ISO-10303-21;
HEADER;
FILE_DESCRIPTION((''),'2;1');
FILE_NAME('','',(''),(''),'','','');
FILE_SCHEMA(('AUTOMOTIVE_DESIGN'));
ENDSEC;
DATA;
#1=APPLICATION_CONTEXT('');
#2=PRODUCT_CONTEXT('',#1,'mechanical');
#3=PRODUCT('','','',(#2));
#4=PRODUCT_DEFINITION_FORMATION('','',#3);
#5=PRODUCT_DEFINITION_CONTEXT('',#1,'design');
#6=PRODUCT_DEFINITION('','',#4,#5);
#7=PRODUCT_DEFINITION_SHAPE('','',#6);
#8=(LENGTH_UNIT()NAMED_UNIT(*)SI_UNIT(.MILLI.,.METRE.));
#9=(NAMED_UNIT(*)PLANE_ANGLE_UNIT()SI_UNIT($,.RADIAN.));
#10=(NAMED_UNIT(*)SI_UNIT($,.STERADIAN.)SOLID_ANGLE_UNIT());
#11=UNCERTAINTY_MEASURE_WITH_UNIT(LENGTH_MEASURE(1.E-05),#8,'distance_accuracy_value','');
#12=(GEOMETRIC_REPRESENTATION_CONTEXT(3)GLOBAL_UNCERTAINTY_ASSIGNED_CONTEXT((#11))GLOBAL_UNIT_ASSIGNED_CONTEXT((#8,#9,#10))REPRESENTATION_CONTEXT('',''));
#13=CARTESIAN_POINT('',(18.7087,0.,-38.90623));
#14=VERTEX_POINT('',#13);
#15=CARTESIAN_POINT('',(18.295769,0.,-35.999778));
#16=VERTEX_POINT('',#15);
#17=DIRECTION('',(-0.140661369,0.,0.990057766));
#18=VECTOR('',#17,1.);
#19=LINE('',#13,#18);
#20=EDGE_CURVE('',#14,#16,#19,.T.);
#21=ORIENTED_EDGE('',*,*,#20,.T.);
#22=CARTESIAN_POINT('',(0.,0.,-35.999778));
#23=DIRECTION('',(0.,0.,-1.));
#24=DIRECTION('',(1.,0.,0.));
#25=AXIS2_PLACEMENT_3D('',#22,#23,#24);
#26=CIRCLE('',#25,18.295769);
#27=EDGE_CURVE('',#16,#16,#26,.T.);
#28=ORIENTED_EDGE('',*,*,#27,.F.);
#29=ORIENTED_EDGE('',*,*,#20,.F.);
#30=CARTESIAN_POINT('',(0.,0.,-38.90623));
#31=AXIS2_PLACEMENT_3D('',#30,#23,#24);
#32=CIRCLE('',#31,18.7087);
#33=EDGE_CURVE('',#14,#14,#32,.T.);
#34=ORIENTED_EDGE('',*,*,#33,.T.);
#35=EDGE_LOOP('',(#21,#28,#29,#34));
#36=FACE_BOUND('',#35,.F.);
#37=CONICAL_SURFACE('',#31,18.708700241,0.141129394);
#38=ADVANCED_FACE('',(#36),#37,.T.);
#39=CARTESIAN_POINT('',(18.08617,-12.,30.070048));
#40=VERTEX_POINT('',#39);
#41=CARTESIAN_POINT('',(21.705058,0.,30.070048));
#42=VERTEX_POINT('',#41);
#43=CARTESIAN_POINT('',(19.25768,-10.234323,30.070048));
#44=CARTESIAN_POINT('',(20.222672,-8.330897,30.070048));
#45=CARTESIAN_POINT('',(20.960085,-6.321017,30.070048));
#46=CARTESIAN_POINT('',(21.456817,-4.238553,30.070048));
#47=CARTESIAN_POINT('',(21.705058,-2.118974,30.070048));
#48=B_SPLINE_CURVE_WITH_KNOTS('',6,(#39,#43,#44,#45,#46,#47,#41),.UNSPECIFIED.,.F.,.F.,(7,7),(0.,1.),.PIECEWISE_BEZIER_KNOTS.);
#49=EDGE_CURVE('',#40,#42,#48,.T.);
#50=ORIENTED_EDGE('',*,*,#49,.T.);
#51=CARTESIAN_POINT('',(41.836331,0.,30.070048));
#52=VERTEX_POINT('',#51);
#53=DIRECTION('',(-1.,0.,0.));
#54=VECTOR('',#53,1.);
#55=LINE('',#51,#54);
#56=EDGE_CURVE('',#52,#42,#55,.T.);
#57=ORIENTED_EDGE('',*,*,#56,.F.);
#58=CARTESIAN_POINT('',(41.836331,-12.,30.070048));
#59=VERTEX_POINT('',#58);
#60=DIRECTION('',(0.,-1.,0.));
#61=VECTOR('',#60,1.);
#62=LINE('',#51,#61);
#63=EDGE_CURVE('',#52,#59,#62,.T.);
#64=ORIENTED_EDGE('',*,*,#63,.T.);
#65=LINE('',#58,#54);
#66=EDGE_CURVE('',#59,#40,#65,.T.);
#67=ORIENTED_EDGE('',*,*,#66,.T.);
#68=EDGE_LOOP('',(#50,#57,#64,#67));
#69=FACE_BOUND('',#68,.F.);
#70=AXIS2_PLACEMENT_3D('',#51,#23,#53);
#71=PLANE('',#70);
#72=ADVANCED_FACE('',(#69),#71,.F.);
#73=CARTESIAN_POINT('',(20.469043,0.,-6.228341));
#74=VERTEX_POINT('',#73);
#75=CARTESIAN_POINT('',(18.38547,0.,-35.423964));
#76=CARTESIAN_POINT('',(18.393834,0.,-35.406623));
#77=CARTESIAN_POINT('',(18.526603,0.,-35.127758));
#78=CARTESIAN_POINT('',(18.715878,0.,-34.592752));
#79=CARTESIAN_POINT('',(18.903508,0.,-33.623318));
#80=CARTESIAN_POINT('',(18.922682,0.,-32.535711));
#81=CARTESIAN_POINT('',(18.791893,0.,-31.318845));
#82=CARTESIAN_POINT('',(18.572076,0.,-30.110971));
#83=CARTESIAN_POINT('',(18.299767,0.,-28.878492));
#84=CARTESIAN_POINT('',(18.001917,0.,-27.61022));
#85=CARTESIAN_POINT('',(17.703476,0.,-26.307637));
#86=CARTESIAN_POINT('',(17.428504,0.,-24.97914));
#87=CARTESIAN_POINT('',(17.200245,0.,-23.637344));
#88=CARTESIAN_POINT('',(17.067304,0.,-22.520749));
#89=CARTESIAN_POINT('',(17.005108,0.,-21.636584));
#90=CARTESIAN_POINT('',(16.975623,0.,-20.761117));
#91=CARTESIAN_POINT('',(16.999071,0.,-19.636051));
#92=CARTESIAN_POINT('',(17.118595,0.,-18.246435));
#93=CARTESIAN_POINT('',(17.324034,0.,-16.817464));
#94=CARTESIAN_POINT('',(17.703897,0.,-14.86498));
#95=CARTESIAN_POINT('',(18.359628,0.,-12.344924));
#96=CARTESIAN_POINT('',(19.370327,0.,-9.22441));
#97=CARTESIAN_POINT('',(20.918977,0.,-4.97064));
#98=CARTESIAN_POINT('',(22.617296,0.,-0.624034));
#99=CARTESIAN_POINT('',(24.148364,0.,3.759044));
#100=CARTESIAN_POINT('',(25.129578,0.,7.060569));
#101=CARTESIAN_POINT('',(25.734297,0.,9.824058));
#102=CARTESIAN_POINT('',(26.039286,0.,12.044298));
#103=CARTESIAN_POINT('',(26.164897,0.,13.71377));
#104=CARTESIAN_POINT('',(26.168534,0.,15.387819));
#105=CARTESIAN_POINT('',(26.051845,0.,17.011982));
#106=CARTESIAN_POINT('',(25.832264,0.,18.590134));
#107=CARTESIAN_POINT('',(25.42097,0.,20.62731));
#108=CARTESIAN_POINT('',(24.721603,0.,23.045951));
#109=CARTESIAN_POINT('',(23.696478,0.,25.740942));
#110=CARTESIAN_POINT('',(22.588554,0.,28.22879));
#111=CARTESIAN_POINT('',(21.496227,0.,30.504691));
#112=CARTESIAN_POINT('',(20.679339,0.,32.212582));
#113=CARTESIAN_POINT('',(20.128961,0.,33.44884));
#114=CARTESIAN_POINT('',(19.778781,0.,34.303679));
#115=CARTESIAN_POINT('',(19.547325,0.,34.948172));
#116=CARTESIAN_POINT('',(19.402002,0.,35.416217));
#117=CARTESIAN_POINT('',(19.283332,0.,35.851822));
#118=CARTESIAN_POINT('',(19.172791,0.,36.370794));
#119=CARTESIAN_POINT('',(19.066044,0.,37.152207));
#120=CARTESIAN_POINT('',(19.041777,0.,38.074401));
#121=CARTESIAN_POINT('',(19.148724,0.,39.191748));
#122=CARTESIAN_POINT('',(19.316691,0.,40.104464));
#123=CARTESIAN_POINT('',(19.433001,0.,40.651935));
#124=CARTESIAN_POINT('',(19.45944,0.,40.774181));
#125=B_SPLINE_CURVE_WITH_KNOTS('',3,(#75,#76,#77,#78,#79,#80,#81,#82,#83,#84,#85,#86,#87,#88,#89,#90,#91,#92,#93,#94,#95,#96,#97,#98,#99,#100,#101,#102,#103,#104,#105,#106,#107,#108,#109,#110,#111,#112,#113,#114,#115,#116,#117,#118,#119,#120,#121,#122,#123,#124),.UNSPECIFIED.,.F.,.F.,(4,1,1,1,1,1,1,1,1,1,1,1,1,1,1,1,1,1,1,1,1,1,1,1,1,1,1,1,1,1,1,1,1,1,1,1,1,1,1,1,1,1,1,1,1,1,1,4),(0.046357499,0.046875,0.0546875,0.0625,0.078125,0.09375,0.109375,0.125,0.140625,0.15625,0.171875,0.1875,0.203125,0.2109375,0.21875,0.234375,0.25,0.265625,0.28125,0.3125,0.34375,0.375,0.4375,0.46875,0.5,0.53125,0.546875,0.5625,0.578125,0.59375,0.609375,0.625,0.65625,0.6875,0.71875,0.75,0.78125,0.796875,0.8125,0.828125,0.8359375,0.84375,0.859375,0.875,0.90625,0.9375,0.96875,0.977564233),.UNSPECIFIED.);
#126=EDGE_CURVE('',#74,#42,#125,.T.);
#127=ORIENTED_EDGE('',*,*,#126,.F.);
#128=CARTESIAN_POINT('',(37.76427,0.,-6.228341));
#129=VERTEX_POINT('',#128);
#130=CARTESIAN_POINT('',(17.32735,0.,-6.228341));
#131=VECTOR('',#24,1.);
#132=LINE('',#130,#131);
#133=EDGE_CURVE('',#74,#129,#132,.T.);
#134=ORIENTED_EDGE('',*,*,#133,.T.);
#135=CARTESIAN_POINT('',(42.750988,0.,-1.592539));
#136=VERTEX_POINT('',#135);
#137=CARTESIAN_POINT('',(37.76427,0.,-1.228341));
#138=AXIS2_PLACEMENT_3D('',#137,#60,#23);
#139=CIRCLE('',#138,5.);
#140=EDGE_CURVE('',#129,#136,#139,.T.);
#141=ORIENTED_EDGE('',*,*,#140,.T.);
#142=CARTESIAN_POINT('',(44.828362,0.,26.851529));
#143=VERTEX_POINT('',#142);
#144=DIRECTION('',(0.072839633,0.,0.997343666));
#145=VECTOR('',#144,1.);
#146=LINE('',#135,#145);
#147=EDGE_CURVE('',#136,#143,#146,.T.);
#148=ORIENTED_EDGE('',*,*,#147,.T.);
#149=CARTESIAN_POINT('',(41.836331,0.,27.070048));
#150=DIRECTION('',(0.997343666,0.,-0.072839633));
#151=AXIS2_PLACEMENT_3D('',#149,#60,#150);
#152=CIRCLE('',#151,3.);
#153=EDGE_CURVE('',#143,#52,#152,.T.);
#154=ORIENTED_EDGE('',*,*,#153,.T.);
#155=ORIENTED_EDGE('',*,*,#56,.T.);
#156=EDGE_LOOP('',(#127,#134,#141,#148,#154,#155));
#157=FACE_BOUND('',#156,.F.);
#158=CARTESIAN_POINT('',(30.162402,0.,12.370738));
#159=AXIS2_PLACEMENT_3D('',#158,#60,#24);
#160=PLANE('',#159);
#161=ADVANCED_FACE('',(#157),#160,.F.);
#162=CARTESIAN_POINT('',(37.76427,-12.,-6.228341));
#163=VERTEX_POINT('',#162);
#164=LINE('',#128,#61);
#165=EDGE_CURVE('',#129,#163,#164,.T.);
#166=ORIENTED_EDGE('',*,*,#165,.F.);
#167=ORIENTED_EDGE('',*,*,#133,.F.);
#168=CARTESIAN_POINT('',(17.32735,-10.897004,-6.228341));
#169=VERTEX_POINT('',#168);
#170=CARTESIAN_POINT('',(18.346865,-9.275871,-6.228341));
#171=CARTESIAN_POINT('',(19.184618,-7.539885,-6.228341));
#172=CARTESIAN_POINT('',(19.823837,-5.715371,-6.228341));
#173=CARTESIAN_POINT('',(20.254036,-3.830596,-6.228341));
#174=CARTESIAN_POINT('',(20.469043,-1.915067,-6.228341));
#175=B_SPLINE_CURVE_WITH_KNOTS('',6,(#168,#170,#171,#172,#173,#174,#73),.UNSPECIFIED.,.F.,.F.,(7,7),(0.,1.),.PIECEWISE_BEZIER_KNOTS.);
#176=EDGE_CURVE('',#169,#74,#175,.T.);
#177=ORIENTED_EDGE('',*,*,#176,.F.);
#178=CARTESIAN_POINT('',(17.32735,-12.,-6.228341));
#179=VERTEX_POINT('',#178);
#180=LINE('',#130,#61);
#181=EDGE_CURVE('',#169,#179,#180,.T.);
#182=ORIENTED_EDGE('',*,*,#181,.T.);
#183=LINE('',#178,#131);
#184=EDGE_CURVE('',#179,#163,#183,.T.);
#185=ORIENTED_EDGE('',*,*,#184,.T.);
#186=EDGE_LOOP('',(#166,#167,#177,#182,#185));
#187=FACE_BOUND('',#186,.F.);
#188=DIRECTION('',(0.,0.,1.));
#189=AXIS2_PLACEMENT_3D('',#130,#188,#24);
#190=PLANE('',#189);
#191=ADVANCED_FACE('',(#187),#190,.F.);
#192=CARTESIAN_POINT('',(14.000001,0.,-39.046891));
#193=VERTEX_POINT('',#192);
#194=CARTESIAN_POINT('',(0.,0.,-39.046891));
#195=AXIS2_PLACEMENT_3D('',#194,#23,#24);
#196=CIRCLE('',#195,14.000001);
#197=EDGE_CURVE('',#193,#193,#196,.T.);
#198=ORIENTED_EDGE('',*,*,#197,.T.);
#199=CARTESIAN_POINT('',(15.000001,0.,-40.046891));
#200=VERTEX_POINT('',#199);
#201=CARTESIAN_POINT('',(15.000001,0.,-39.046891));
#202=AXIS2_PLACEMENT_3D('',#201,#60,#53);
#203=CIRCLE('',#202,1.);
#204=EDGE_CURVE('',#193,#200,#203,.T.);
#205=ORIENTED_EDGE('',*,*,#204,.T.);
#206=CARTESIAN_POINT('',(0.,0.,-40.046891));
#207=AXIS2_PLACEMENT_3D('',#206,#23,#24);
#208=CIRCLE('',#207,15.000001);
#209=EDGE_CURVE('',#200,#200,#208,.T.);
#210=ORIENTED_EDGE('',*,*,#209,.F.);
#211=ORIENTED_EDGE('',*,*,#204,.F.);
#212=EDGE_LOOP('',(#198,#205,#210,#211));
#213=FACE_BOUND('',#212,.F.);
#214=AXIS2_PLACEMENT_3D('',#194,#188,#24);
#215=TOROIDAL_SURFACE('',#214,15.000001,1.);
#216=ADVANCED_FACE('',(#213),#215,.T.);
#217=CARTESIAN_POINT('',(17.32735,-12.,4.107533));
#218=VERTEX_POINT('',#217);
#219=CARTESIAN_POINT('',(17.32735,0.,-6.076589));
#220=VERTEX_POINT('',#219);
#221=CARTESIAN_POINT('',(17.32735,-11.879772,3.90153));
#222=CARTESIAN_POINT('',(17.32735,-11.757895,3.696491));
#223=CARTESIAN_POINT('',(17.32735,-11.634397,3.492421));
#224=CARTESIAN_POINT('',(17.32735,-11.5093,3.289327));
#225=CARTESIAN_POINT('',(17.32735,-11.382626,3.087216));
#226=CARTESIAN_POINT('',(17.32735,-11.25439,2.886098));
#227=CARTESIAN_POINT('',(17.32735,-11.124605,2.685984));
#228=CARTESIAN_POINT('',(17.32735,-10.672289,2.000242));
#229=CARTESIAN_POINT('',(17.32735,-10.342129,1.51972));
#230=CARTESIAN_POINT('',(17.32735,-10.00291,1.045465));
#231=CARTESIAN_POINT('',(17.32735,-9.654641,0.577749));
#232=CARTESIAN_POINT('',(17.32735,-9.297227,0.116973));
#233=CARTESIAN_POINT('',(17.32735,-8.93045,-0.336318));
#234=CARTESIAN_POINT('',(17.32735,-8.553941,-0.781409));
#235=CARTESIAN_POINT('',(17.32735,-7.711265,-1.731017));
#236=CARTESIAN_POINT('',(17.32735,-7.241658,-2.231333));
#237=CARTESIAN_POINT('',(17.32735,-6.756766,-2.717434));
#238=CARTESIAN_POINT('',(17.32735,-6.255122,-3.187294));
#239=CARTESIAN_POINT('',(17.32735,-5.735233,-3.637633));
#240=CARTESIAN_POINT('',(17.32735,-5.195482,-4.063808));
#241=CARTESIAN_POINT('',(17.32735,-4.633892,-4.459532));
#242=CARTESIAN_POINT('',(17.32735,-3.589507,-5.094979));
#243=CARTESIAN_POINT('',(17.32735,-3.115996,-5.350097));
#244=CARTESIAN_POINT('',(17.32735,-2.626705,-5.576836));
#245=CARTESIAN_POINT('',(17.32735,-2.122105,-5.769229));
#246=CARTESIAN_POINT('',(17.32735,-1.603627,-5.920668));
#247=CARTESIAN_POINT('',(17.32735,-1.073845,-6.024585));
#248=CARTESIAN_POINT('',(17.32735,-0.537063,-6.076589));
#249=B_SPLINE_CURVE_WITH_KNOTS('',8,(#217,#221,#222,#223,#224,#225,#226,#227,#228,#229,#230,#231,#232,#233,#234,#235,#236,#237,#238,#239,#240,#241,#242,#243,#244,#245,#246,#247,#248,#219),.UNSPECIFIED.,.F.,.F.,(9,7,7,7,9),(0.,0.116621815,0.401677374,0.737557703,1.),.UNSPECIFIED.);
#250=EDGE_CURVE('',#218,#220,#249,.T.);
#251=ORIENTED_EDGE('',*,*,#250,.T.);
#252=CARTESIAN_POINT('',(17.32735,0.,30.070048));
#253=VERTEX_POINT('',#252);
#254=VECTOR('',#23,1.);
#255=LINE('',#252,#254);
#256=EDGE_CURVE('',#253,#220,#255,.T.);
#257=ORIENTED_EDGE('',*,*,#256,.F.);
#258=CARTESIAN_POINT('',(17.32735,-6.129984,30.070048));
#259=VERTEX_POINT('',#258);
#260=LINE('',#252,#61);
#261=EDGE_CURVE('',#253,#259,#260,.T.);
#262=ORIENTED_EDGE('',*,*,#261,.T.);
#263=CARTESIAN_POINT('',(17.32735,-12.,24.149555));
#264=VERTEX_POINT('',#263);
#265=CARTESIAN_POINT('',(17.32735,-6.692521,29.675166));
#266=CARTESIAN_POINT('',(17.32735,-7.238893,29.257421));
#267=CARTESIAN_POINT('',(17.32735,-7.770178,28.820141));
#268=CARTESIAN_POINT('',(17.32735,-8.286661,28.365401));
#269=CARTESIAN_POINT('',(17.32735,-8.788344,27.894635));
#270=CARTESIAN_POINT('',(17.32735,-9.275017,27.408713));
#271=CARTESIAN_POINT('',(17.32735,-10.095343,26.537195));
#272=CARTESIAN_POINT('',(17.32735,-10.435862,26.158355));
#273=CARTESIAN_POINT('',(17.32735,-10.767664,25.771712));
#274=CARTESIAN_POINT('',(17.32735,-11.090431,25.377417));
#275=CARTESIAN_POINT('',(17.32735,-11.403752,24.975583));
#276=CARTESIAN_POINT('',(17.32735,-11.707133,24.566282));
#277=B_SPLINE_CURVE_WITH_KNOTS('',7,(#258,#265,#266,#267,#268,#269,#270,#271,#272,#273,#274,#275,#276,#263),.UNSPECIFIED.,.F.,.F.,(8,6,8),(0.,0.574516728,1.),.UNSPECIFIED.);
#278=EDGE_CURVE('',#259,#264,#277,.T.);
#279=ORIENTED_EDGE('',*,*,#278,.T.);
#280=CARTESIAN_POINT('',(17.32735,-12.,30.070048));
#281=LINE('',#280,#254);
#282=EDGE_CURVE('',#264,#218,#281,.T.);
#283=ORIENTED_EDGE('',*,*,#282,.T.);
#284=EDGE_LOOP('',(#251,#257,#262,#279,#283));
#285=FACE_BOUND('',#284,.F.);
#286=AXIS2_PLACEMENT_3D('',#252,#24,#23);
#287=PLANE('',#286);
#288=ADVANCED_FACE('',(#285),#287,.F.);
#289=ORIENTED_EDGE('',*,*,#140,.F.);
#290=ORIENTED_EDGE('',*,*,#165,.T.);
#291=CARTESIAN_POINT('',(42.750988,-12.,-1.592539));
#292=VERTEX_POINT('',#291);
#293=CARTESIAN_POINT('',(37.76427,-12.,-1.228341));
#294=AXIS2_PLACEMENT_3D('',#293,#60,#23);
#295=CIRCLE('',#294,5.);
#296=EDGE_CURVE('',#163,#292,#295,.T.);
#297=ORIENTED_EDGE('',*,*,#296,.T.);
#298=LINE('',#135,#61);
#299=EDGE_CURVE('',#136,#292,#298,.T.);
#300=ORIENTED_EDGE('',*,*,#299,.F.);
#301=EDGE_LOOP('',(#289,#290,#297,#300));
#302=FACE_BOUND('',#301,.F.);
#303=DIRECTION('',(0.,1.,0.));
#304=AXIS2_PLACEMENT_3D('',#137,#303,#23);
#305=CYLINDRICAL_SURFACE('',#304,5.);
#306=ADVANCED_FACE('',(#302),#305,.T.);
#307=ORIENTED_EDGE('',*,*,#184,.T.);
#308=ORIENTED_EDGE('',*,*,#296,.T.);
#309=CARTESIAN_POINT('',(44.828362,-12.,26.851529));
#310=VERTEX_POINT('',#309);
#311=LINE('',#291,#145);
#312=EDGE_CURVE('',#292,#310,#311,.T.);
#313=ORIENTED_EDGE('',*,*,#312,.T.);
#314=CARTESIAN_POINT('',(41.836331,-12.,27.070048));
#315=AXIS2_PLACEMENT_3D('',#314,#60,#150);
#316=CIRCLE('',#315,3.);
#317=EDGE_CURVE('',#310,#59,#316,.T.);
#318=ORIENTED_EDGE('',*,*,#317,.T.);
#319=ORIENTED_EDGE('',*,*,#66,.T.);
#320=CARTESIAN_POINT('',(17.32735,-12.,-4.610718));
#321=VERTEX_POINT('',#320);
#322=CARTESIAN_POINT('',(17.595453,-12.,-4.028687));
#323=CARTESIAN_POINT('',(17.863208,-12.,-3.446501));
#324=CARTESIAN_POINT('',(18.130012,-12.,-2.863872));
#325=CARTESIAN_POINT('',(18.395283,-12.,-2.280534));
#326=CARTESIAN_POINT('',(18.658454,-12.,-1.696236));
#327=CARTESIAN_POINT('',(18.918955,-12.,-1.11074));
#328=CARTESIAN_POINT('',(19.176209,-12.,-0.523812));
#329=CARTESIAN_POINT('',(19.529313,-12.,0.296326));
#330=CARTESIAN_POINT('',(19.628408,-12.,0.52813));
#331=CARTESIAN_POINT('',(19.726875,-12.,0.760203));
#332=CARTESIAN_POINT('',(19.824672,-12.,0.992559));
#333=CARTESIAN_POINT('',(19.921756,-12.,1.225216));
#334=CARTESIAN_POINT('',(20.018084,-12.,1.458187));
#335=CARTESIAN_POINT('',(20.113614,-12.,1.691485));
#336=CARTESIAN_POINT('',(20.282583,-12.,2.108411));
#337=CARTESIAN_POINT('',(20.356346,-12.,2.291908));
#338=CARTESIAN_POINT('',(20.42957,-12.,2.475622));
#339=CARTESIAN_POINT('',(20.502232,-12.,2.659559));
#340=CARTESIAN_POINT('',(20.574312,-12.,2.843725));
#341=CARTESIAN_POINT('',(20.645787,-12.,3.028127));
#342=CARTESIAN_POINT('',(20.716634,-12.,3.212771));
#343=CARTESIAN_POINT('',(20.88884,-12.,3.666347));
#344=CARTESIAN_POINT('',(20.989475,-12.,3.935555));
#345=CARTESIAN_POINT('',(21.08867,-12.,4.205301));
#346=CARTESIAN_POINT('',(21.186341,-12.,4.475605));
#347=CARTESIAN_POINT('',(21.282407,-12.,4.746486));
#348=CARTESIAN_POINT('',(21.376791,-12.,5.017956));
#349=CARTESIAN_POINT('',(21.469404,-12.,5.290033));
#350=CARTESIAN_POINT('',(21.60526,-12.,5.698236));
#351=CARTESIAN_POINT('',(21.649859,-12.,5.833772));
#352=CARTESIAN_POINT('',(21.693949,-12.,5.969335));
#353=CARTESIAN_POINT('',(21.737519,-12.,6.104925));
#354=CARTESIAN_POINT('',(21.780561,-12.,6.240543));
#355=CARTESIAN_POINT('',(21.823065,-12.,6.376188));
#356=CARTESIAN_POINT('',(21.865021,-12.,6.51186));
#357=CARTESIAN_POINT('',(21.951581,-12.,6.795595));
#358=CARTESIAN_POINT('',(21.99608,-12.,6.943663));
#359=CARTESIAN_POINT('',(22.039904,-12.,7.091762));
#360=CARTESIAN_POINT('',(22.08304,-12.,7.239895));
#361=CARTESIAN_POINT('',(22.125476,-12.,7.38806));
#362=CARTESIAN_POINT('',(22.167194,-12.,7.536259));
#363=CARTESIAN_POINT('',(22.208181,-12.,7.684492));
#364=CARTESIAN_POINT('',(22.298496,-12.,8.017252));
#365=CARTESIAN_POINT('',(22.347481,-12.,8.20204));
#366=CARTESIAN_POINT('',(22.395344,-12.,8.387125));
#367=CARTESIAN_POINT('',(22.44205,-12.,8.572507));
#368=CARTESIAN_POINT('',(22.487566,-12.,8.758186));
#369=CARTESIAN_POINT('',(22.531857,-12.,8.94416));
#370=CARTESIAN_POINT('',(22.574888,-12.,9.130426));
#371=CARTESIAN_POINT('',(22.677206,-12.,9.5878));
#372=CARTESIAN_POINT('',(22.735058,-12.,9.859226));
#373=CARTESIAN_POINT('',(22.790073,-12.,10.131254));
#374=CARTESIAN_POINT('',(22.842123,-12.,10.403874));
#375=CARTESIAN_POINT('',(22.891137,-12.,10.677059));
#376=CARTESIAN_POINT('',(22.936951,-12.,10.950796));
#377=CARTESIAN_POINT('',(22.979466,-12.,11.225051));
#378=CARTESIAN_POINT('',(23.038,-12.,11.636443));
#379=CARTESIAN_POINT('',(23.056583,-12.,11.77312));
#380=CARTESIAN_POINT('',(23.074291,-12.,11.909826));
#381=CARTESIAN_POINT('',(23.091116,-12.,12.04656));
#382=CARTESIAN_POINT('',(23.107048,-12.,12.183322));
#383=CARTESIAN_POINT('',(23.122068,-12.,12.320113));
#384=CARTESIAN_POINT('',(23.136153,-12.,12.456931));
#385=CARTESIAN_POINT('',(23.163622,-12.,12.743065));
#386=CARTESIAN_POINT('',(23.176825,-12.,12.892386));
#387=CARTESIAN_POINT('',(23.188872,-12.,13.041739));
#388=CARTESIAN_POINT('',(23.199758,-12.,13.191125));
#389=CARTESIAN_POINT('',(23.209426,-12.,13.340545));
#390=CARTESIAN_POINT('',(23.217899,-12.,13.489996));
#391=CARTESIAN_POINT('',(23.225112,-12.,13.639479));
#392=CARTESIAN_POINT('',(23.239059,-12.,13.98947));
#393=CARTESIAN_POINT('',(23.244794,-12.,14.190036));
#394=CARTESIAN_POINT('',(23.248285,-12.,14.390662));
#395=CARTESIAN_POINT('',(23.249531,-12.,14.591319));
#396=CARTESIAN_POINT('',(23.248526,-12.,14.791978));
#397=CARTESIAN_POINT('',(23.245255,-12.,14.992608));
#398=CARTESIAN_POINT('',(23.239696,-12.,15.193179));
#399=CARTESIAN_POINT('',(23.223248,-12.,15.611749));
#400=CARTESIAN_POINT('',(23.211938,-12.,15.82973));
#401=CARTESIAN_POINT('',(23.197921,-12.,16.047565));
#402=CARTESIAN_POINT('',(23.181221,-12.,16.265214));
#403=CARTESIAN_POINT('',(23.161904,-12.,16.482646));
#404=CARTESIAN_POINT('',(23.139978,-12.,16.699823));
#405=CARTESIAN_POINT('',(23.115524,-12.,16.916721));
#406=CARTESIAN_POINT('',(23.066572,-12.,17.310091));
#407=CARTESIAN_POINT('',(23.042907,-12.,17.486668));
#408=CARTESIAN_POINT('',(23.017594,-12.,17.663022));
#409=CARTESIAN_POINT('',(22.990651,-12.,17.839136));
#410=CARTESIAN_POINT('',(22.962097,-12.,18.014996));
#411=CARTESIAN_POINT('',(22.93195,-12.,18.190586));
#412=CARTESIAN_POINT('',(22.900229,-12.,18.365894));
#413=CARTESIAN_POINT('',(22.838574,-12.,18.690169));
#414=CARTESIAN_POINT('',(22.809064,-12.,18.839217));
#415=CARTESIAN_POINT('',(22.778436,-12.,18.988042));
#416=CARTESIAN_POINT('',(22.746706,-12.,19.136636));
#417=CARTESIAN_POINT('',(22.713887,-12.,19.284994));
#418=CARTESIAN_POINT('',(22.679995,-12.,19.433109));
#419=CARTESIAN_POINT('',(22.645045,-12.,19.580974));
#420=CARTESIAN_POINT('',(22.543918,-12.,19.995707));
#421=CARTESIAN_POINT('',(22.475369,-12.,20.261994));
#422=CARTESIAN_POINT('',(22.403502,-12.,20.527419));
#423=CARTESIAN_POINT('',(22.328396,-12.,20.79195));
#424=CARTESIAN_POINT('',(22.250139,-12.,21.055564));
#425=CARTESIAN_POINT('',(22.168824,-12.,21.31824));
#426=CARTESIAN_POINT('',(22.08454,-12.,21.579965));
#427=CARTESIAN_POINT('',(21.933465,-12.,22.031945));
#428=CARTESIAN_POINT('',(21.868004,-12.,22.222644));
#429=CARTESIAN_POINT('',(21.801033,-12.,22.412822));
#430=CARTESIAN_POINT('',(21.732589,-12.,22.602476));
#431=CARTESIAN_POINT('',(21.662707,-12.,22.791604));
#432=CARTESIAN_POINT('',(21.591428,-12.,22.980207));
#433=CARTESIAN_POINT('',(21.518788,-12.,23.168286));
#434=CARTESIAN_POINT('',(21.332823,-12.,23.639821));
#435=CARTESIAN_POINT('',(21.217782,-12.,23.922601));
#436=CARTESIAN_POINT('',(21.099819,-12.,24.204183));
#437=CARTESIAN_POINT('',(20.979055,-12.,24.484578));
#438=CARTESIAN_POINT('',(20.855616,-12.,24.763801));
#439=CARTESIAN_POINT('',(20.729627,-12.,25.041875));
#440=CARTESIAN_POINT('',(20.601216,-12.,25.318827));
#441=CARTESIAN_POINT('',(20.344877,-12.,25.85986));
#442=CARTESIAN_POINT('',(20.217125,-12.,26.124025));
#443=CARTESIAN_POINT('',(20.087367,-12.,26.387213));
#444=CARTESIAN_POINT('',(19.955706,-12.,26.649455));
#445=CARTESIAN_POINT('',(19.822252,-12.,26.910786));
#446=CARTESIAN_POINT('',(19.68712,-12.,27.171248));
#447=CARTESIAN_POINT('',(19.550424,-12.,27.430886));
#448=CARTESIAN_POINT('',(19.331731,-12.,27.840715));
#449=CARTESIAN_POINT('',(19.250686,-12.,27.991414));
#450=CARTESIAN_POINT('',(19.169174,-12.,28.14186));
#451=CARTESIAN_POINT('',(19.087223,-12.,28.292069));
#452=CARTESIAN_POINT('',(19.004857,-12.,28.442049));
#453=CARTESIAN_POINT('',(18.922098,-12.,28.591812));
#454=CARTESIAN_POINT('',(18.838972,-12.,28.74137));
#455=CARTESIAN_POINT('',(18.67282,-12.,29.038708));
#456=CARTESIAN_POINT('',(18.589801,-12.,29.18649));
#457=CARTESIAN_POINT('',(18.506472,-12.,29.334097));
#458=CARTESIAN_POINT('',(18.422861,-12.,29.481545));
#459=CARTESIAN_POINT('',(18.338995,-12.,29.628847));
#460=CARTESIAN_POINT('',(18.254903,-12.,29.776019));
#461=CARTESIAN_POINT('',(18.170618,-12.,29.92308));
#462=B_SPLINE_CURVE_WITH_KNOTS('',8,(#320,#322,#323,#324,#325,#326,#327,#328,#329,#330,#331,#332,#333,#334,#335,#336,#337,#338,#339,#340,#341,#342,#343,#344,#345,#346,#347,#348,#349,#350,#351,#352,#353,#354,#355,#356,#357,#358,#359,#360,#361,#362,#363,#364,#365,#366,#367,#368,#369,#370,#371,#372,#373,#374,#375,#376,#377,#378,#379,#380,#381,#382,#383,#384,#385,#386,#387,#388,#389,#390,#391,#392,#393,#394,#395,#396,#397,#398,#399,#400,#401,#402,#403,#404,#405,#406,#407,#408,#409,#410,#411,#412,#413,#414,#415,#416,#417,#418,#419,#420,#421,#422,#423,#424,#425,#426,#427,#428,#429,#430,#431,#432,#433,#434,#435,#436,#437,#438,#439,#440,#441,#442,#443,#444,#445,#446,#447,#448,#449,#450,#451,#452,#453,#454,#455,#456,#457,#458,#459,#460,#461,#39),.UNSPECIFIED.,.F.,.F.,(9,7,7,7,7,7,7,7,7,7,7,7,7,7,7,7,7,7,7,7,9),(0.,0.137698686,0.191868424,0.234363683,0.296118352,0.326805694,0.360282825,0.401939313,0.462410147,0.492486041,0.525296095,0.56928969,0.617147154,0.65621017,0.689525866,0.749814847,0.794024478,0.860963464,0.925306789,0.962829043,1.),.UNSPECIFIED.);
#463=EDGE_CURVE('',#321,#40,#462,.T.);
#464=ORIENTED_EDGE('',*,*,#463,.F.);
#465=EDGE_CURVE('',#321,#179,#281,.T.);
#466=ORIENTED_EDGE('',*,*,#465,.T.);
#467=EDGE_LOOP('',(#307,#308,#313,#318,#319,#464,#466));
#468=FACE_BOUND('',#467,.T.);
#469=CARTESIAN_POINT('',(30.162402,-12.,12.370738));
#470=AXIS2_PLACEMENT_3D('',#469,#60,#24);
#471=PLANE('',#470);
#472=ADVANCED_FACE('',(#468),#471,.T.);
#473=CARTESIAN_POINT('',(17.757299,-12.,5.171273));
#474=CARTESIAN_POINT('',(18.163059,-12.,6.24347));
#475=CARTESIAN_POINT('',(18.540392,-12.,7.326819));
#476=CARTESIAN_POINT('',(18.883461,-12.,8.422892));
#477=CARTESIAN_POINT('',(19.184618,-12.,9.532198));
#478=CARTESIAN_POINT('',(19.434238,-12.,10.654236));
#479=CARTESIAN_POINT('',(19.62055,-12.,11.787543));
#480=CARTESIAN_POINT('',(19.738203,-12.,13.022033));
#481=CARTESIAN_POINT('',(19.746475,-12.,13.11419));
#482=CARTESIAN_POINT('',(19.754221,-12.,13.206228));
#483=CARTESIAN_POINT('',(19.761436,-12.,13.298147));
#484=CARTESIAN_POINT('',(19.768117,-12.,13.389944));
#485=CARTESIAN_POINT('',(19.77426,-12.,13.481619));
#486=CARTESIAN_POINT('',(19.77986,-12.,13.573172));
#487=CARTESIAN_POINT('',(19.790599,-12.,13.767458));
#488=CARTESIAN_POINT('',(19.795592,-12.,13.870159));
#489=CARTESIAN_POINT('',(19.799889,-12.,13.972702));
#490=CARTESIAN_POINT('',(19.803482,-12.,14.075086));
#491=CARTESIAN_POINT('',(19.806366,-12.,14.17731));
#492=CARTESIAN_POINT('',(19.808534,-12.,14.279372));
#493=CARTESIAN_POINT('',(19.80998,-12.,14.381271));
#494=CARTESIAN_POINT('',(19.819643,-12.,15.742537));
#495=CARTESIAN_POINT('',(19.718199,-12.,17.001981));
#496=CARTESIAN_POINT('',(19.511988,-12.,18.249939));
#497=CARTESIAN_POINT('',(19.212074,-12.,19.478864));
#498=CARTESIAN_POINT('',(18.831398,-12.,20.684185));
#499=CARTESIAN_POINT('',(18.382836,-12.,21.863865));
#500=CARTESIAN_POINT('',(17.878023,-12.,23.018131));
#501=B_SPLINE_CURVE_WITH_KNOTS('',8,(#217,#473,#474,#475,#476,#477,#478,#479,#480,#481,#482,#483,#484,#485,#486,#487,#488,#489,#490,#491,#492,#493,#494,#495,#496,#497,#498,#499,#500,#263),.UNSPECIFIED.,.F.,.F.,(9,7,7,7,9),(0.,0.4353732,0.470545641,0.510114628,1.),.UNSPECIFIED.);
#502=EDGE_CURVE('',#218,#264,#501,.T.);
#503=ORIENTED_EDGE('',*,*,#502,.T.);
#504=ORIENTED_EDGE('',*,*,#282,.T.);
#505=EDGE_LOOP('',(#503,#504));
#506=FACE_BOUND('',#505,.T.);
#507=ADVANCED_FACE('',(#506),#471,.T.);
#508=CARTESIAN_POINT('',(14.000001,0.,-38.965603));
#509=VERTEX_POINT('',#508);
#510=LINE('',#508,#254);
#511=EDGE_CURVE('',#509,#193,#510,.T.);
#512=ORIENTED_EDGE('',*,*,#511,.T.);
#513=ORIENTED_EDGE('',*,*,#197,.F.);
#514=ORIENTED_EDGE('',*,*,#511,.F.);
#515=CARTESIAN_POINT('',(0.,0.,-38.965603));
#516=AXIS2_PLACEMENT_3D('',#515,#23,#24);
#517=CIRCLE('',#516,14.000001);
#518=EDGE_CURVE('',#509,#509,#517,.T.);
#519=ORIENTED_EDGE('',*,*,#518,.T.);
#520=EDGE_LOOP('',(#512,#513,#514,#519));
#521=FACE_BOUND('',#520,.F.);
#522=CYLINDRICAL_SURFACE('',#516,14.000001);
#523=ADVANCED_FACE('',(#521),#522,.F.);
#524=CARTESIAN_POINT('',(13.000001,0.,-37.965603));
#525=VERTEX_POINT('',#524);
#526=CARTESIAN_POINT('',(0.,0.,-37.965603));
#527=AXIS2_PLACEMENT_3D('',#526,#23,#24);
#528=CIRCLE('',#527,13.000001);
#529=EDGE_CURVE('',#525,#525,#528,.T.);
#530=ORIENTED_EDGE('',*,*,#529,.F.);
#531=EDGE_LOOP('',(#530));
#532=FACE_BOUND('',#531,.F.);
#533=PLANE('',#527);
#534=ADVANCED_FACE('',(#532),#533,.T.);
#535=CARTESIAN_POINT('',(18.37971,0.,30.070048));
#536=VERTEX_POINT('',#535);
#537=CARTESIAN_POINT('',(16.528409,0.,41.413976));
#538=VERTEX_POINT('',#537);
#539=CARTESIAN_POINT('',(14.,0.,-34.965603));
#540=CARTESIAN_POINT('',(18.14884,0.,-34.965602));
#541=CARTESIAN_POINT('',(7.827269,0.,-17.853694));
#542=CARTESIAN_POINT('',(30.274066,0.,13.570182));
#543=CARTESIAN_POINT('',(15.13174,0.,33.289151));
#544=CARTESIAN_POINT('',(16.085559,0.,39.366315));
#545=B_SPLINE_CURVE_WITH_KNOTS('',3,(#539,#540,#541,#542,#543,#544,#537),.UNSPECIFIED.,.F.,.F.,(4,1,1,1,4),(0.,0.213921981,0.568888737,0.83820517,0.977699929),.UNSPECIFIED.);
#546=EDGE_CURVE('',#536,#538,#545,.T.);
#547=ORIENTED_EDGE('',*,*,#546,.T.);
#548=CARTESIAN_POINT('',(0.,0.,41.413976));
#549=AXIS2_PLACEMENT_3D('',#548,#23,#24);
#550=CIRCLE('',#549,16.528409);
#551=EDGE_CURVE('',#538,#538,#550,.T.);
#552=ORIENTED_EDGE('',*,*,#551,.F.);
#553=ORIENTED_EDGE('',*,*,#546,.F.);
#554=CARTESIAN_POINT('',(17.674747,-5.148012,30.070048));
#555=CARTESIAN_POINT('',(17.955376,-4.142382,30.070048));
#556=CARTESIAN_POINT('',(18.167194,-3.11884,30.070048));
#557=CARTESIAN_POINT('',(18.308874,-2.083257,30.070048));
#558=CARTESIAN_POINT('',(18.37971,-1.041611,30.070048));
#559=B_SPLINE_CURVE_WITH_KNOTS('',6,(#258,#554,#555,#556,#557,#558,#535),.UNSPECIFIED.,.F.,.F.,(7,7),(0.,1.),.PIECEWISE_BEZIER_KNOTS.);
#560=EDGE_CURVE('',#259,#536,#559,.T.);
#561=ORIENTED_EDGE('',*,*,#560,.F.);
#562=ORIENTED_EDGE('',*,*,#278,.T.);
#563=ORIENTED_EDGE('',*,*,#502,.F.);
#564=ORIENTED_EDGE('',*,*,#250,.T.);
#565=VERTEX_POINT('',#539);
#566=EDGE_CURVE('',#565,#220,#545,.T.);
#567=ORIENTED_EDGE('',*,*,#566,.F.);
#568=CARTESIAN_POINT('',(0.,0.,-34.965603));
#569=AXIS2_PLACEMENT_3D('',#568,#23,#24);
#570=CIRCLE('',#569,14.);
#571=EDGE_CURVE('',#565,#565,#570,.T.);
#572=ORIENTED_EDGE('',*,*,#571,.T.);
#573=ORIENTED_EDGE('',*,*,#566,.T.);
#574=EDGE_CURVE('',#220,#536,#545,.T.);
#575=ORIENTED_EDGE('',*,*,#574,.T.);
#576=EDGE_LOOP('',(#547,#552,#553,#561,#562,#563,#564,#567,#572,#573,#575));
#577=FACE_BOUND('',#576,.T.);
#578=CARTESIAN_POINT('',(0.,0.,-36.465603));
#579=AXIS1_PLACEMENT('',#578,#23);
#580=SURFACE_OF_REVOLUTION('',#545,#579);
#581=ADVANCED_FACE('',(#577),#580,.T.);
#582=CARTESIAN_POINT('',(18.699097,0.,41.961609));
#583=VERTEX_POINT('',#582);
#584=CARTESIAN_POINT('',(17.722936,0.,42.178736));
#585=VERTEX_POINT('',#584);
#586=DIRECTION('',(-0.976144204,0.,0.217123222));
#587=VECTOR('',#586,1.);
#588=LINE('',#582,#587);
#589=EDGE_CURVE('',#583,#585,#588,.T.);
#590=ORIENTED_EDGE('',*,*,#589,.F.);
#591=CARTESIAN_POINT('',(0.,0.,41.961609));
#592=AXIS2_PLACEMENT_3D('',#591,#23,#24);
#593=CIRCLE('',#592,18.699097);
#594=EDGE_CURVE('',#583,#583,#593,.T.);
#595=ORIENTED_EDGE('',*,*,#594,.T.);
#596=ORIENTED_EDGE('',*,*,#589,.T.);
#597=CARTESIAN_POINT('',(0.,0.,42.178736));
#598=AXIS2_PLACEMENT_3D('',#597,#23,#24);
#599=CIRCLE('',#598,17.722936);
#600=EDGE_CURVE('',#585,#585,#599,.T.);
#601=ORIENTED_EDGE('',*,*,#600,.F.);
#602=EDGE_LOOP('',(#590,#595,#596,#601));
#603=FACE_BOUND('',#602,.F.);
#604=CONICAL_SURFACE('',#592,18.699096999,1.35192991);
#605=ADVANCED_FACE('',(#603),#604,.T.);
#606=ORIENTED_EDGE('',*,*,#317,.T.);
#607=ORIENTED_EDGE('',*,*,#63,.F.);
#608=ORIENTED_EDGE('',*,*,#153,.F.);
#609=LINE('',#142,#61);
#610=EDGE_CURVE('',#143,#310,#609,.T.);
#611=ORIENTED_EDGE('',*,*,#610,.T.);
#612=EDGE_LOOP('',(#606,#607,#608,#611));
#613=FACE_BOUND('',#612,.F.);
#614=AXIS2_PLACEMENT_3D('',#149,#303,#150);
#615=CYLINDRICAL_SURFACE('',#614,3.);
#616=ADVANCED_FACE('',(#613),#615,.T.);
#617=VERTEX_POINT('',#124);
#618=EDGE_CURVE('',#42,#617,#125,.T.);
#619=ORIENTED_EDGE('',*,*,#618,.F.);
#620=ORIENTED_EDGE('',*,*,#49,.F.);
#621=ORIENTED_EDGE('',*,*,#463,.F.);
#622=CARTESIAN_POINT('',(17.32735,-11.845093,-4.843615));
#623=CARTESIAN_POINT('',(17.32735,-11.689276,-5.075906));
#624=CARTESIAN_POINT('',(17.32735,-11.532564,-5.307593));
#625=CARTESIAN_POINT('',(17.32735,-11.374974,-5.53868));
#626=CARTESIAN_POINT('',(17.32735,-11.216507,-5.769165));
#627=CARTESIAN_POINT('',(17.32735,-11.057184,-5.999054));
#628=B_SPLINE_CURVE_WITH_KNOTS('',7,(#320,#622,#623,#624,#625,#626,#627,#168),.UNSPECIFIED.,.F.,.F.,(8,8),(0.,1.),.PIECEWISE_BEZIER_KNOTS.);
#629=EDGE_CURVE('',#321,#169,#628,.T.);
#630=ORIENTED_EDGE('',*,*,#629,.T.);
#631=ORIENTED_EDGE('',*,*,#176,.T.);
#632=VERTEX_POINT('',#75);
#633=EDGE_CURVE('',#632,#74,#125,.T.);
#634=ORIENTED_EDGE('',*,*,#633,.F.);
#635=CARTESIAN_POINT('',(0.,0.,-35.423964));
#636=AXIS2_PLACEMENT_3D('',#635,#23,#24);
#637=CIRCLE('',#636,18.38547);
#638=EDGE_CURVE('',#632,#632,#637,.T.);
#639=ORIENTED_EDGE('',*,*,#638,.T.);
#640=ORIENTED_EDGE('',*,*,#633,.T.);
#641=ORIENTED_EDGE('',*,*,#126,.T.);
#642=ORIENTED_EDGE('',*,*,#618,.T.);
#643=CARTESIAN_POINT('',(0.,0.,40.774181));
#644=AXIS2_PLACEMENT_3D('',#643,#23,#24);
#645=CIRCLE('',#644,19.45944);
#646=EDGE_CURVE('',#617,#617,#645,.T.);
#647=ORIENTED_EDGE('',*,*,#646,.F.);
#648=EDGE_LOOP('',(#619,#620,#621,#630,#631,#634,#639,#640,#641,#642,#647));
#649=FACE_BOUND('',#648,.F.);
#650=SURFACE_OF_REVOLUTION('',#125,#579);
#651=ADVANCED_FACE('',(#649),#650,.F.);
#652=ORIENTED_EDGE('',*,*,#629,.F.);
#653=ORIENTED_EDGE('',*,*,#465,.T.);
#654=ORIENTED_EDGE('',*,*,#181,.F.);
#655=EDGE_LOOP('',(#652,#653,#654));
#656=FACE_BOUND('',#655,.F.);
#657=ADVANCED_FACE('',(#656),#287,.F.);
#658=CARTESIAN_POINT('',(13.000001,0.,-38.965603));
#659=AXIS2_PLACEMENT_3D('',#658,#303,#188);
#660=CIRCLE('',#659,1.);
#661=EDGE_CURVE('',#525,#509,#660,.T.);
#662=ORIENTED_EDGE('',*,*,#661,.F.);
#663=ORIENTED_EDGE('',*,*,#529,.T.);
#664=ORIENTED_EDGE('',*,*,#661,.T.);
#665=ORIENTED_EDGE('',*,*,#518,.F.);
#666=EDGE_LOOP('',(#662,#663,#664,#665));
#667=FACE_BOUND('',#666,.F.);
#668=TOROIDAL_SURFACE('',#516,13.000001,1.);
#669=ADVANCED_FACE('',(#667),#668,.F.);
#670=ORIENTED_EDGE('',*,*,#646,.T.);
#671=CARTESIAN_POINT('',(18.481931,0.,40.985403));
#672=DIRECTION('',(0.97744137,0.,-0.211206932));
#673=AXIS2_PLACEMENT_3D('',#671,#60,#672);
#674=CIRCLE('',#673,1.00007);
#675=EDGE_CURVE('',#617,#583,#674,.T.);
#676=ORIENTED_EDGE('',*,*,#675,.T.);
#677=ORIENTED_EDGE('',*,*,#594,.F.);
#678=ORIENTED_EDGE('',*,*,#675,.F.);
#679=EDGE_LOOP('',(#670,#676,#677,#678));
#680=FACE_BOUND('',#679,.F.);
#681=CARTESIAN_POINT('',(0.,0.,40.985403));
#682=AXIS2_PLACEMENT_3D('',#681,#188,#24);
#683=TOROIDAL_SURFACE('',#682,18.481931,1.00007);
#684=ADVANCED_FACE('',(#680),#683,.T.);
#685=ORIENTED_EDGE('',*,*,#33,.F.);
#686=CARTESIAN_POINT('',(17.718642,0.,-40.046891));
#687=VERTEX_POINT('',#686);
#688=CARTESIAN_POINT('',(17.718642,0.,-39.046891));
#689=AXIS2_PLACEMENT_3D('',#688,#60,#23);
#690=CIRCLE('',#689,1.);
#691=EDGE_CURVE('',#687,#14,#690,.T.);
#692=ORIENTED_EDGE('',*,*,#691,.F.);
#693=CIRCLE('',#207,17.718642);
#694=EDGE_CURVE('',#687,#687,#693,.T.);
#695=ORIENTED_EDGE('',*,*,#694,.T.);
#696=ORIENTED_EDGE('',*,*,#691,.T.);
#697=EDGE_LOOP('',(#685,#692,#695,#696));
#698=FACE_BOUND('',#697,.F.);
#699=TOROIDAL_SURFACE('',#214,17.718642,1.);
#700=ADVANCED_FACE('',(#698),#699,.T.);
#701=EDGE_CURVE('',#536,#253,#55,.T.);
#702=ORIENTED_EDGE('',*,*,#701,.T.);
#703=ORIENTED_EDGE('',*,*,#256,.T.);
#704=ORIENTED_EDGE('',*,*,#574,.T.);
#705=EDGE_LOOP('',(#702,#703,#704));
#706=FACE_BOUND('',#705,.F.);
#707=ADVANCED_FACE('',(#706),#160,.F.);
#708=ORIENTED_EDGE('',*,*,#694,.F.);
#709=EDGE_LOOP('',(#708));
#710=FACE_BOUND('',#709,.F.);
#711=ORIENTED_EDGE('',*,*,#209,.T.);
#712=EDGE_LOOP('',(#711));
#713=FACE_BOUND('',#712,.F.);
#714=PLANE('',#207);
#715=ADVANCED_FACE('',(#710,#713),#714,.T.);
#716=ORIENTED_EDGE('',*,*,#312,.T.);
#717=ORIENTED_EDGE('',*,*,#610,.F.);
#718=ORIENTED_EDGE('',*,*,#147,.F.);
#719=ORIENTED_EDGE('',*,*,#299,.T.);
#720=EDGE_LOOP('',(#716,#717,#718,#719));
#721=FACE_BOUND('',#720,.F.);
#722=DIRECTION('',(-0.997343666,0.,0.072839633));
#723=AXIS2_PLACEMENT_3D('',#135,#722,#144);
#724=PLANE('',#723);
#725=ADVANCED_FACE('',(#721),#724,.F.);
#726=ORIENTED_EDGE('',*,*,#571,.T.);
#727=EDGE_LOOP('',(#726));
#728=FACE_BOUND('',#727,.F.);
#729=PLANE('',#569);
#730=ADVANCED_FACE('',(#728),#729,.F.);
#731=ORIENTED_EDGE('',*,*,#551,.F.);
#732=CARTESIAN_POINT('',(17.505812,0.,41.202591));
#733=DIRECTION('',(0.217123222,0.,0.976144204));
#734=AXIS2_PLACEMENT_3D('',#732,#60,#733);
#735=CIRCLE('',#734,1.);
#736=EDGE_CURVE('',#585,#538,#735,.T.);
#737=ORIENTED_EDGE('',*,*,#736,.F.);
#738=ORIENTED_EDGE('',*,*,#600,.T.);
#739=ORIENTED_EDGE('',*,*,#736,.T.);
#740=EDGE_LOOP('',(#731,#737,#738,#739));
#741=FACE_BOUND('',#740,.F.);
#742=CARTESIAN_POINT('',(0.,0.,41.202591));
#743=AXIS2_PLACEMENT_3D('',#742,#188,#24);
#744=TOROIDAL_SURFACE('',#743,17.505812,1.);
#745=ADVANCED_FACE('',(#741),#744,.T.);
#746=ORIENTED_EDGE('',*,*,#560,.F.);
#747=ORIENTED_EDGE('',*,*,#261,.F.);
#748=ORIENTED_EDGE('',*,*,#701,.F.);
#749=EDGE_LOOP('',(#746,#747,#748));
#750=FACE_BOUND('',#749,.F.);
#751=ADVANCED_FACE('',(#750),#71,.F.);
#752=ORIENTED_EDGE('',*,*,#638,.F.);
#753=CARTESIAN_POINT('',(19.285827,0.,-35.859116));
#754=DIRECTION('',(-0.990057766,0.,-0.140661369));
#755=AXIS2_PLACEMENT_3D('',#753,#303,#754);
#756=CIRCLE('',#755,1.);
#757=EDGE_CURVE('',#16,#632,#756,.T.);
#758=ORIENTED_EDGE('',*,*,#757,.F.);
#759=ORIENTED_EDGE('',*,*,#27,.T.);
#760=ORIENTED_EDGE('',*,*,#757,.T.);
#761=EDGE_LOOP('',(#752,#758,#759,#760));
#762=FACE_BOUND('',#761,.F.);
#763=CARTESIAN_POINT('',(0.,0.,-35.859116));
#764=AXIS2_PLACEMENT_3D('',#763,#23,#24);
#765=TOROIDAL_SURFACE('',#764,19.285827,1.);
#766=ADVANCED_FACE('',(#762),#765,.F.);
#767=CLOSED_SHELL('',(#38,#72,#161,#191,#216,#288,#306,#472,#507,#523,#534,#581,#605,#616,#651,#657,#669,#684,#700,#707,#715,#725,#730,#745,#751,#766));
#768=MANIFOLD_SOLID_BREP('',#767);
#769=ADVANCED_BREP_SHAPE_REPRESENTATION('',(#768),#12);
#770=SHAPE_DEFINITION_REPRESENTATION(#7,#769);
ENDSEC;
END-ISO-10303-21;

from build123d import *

# Parameters (mm, degrees)
F3_DEPTH = 12


# Not quite as in the source:
# - ends of sketch curves that miss each other by under 0.0002 mm in the source are joined
# - the dataset's text gives a spline's control points without its knots; the knots are read off the source's solid
# - a feature names something its author has since deleted; it is built from what else it names


with BuildPart() as f1:
    # F0 (on Front) → F1 (revolve)
    with BuildSketch(Plane.XZ):
        with BuildLine():
            Line((14, -34.9656030457), (0, -34.9656030457))
            Line((0, -34.9656030457), (0, -37.9656030457))
            Line((0, -37.9656030457), (13.0000005874, -37.9656030457))
            ThreePointArc((13.0000005874, -37.9656030457), (13.7071073686, -38.2584962646), (14.0000005874, -38.9656030457))
            Line((14.0000005874, -38.9656030457), (14.0000005874, -39.046891405))
            ThreePointArc((14.0000005874, -39.046891405), (14.2928938062, -39.7539981862), (15.0000005874, -40.046891405))
            Line((15.0000005874, -40.046891405), (17.7186424754, -40.046891405))
            ThreePointArc((17.7186424754, -40.046891405), (18.4738448885, -39.7023830643), (18.708700241, -38.9062300358))
            Line((18.708700241, -38.9062300358), (18.2957692257, -35.9997777484))
            ThreePointArc((18.2957692257, -35.9997777484), (18.2977444092, -35.7051916871), (18.3854701901, -35.4239639569))
            add(Edge.make_bspline(
                [(18.3854701901, -35.4239639569), (18.3938341208, -35.4066229273), (18.5266025306, -35.1277578366), (18.715877762, -34.5927520996), (18.9035078406, -33.6233183365), (18.9226821636, -32.5357112994), (18.7918928566, -31.3188454124), (18.5720759542, -30.1109709554), (18.2997668102, -28.8784920294), (18.0019168963, -27.6102199641), (17.7034756417, -26.3076373829), (17.4285036664, -24.9791398913), (17.2002452219, -23.6373442156), (17.0673042938, -22.5207488001), (17.0051081865, -21.6365836967), (16.9756231658, -20.7611172733), (16.9990707182, -19.6360514205), (17.1185949958, -18.2464350707), (17.3240335952, -16.8174640009), (17.7038966841, -14.8649802067), (18.3596277701, -12.3449239598), (19.3703268305, -9.2244095855), (20.9189772303, -4.9706404314), (22.6172956433, -0.6240335836), (24.1483643217, 3.7590439656), (25.1295783411, 7.0605692876), (25.7342965147, 9.8240580962), (26.0392862698, 12.0442976969), (26.1648967684, 13.7137703794), (26.1685337061, 15.3878187051), (26.0518454029, 17.0119822189), (25.8322638307, 18.5901337627), (25.4209698448, 20.627310439), (24.7216031829, 23.0459512807), (23.6964780756, 25.7409416359), (22.5885542227, 28.228790192), (21.4962267159, 30.5046914486), (20.6793388957, 32.21258168), (20.1289606437, 33.4488399425), (19.7787812598, 34.3036786221), (19.547325286, 34.9481723653), (19.4020021639, 35.416216841), (19.2833316507, 35.8518216962), (19.1727912273, 36.370793715), (19.0660440192, 37.1522073311), (19.0417766325, 38.0744005106), (19.1487238737, 39.1917477059), (19.3166912918, 40.104463848), (19.4330006188, 40.6519351293), (19.4594400571, 40.7741810345)],
                knots=[0.0463574991, 0.0463574991, 0.0463574991, 0.0463574991, 0.046875, 0.0546875, 0.0625, 0.078125, 0.09375, 0.109375, 0.125, 0.140625, 0.15625, 0.171875, 0.1875, 0.203125, 0.2109375, 0.21875, 0.234375, 0.25, 0.265625, 0.28125, 0.3125, 0.34375, 0.375, 0.4375, 0.46875, 0.5, 0.53125, 0.546875, 0.5625, 0.578125, 0.59375, 0.609375, 0.625, 0.65625, 0.6875, 0.71875, 0.75, 0.78125, 0.796875, 0.8125, 0.828125, 0.8359375, 0.84375, 0.859375, 0.875, 0.90625, 0.9375, 0.96875, 0.9775642332, 0.9775642332, 0.9775642332, 0.9775642332], degree=3))
            ThreePointArc((19.4594400571, 40.7741810345), (19.3241307475, 41.5246968677), (18.6990969993, 41.961608619))
            Line((18.6990969993, 41.961608619), (17.7229356258, 42.1787356599))
            ThreePointArc((17.7229356258, 42.1787356599), (16.9666270477, 42.04477858), (16.5284093417, 41.4139755943))
            add(Edge.make_bspline(
                [(14, -34.9656030457), (18.1488398757, -34.9656022334), (7.8272694156, -17.8536936323), (30.2740659447, 13.5701815718), (15.1317400386, 33.2891506405), (16.0855594241, 39.3663154938), (16.5284093417, 41.4139755943)],
                knots=[0, 0, 0, 0, 0.2139219808, 0.5688887366, 0.8382051703, 0.9776999292, 0.9776999292, 0.9776999292, 0.9776999292], degree=3))
        make_face()
    revolve(axis=Axis((0, 0, -36.4656030457), (0, 0, -1)))

    # F2 (on Front) → F3 (join)
    with BuildSketch(Plane.XZ):
        with BuildLine():
            Line((41.8363309535, 30.0700475706), (17.3273498321, 30.0700475706))
            Line((17.3273498321, 30.0700475706), (17.3273498321, -6.2283408547))
            Line((17.3273498321, -6.2283408547), (37.764269958, -6.2283408547))
            ThreePointArc((37.764269958, -6.2283408547), (41.1686061021, -4.8903751825), (42.7509882873, -1.592539022))
            Line((42.7509882873, -1.592539022), (44.828361951, 26.8515286702))
            ThreePointArc((44.828361951, 26.8515286702), (44.0335515502, 29.112649257), (41.8363309535, 30.0700475706))
        make_face()
    extrude(amount=F3_DEPTH)


solid = f1.part
